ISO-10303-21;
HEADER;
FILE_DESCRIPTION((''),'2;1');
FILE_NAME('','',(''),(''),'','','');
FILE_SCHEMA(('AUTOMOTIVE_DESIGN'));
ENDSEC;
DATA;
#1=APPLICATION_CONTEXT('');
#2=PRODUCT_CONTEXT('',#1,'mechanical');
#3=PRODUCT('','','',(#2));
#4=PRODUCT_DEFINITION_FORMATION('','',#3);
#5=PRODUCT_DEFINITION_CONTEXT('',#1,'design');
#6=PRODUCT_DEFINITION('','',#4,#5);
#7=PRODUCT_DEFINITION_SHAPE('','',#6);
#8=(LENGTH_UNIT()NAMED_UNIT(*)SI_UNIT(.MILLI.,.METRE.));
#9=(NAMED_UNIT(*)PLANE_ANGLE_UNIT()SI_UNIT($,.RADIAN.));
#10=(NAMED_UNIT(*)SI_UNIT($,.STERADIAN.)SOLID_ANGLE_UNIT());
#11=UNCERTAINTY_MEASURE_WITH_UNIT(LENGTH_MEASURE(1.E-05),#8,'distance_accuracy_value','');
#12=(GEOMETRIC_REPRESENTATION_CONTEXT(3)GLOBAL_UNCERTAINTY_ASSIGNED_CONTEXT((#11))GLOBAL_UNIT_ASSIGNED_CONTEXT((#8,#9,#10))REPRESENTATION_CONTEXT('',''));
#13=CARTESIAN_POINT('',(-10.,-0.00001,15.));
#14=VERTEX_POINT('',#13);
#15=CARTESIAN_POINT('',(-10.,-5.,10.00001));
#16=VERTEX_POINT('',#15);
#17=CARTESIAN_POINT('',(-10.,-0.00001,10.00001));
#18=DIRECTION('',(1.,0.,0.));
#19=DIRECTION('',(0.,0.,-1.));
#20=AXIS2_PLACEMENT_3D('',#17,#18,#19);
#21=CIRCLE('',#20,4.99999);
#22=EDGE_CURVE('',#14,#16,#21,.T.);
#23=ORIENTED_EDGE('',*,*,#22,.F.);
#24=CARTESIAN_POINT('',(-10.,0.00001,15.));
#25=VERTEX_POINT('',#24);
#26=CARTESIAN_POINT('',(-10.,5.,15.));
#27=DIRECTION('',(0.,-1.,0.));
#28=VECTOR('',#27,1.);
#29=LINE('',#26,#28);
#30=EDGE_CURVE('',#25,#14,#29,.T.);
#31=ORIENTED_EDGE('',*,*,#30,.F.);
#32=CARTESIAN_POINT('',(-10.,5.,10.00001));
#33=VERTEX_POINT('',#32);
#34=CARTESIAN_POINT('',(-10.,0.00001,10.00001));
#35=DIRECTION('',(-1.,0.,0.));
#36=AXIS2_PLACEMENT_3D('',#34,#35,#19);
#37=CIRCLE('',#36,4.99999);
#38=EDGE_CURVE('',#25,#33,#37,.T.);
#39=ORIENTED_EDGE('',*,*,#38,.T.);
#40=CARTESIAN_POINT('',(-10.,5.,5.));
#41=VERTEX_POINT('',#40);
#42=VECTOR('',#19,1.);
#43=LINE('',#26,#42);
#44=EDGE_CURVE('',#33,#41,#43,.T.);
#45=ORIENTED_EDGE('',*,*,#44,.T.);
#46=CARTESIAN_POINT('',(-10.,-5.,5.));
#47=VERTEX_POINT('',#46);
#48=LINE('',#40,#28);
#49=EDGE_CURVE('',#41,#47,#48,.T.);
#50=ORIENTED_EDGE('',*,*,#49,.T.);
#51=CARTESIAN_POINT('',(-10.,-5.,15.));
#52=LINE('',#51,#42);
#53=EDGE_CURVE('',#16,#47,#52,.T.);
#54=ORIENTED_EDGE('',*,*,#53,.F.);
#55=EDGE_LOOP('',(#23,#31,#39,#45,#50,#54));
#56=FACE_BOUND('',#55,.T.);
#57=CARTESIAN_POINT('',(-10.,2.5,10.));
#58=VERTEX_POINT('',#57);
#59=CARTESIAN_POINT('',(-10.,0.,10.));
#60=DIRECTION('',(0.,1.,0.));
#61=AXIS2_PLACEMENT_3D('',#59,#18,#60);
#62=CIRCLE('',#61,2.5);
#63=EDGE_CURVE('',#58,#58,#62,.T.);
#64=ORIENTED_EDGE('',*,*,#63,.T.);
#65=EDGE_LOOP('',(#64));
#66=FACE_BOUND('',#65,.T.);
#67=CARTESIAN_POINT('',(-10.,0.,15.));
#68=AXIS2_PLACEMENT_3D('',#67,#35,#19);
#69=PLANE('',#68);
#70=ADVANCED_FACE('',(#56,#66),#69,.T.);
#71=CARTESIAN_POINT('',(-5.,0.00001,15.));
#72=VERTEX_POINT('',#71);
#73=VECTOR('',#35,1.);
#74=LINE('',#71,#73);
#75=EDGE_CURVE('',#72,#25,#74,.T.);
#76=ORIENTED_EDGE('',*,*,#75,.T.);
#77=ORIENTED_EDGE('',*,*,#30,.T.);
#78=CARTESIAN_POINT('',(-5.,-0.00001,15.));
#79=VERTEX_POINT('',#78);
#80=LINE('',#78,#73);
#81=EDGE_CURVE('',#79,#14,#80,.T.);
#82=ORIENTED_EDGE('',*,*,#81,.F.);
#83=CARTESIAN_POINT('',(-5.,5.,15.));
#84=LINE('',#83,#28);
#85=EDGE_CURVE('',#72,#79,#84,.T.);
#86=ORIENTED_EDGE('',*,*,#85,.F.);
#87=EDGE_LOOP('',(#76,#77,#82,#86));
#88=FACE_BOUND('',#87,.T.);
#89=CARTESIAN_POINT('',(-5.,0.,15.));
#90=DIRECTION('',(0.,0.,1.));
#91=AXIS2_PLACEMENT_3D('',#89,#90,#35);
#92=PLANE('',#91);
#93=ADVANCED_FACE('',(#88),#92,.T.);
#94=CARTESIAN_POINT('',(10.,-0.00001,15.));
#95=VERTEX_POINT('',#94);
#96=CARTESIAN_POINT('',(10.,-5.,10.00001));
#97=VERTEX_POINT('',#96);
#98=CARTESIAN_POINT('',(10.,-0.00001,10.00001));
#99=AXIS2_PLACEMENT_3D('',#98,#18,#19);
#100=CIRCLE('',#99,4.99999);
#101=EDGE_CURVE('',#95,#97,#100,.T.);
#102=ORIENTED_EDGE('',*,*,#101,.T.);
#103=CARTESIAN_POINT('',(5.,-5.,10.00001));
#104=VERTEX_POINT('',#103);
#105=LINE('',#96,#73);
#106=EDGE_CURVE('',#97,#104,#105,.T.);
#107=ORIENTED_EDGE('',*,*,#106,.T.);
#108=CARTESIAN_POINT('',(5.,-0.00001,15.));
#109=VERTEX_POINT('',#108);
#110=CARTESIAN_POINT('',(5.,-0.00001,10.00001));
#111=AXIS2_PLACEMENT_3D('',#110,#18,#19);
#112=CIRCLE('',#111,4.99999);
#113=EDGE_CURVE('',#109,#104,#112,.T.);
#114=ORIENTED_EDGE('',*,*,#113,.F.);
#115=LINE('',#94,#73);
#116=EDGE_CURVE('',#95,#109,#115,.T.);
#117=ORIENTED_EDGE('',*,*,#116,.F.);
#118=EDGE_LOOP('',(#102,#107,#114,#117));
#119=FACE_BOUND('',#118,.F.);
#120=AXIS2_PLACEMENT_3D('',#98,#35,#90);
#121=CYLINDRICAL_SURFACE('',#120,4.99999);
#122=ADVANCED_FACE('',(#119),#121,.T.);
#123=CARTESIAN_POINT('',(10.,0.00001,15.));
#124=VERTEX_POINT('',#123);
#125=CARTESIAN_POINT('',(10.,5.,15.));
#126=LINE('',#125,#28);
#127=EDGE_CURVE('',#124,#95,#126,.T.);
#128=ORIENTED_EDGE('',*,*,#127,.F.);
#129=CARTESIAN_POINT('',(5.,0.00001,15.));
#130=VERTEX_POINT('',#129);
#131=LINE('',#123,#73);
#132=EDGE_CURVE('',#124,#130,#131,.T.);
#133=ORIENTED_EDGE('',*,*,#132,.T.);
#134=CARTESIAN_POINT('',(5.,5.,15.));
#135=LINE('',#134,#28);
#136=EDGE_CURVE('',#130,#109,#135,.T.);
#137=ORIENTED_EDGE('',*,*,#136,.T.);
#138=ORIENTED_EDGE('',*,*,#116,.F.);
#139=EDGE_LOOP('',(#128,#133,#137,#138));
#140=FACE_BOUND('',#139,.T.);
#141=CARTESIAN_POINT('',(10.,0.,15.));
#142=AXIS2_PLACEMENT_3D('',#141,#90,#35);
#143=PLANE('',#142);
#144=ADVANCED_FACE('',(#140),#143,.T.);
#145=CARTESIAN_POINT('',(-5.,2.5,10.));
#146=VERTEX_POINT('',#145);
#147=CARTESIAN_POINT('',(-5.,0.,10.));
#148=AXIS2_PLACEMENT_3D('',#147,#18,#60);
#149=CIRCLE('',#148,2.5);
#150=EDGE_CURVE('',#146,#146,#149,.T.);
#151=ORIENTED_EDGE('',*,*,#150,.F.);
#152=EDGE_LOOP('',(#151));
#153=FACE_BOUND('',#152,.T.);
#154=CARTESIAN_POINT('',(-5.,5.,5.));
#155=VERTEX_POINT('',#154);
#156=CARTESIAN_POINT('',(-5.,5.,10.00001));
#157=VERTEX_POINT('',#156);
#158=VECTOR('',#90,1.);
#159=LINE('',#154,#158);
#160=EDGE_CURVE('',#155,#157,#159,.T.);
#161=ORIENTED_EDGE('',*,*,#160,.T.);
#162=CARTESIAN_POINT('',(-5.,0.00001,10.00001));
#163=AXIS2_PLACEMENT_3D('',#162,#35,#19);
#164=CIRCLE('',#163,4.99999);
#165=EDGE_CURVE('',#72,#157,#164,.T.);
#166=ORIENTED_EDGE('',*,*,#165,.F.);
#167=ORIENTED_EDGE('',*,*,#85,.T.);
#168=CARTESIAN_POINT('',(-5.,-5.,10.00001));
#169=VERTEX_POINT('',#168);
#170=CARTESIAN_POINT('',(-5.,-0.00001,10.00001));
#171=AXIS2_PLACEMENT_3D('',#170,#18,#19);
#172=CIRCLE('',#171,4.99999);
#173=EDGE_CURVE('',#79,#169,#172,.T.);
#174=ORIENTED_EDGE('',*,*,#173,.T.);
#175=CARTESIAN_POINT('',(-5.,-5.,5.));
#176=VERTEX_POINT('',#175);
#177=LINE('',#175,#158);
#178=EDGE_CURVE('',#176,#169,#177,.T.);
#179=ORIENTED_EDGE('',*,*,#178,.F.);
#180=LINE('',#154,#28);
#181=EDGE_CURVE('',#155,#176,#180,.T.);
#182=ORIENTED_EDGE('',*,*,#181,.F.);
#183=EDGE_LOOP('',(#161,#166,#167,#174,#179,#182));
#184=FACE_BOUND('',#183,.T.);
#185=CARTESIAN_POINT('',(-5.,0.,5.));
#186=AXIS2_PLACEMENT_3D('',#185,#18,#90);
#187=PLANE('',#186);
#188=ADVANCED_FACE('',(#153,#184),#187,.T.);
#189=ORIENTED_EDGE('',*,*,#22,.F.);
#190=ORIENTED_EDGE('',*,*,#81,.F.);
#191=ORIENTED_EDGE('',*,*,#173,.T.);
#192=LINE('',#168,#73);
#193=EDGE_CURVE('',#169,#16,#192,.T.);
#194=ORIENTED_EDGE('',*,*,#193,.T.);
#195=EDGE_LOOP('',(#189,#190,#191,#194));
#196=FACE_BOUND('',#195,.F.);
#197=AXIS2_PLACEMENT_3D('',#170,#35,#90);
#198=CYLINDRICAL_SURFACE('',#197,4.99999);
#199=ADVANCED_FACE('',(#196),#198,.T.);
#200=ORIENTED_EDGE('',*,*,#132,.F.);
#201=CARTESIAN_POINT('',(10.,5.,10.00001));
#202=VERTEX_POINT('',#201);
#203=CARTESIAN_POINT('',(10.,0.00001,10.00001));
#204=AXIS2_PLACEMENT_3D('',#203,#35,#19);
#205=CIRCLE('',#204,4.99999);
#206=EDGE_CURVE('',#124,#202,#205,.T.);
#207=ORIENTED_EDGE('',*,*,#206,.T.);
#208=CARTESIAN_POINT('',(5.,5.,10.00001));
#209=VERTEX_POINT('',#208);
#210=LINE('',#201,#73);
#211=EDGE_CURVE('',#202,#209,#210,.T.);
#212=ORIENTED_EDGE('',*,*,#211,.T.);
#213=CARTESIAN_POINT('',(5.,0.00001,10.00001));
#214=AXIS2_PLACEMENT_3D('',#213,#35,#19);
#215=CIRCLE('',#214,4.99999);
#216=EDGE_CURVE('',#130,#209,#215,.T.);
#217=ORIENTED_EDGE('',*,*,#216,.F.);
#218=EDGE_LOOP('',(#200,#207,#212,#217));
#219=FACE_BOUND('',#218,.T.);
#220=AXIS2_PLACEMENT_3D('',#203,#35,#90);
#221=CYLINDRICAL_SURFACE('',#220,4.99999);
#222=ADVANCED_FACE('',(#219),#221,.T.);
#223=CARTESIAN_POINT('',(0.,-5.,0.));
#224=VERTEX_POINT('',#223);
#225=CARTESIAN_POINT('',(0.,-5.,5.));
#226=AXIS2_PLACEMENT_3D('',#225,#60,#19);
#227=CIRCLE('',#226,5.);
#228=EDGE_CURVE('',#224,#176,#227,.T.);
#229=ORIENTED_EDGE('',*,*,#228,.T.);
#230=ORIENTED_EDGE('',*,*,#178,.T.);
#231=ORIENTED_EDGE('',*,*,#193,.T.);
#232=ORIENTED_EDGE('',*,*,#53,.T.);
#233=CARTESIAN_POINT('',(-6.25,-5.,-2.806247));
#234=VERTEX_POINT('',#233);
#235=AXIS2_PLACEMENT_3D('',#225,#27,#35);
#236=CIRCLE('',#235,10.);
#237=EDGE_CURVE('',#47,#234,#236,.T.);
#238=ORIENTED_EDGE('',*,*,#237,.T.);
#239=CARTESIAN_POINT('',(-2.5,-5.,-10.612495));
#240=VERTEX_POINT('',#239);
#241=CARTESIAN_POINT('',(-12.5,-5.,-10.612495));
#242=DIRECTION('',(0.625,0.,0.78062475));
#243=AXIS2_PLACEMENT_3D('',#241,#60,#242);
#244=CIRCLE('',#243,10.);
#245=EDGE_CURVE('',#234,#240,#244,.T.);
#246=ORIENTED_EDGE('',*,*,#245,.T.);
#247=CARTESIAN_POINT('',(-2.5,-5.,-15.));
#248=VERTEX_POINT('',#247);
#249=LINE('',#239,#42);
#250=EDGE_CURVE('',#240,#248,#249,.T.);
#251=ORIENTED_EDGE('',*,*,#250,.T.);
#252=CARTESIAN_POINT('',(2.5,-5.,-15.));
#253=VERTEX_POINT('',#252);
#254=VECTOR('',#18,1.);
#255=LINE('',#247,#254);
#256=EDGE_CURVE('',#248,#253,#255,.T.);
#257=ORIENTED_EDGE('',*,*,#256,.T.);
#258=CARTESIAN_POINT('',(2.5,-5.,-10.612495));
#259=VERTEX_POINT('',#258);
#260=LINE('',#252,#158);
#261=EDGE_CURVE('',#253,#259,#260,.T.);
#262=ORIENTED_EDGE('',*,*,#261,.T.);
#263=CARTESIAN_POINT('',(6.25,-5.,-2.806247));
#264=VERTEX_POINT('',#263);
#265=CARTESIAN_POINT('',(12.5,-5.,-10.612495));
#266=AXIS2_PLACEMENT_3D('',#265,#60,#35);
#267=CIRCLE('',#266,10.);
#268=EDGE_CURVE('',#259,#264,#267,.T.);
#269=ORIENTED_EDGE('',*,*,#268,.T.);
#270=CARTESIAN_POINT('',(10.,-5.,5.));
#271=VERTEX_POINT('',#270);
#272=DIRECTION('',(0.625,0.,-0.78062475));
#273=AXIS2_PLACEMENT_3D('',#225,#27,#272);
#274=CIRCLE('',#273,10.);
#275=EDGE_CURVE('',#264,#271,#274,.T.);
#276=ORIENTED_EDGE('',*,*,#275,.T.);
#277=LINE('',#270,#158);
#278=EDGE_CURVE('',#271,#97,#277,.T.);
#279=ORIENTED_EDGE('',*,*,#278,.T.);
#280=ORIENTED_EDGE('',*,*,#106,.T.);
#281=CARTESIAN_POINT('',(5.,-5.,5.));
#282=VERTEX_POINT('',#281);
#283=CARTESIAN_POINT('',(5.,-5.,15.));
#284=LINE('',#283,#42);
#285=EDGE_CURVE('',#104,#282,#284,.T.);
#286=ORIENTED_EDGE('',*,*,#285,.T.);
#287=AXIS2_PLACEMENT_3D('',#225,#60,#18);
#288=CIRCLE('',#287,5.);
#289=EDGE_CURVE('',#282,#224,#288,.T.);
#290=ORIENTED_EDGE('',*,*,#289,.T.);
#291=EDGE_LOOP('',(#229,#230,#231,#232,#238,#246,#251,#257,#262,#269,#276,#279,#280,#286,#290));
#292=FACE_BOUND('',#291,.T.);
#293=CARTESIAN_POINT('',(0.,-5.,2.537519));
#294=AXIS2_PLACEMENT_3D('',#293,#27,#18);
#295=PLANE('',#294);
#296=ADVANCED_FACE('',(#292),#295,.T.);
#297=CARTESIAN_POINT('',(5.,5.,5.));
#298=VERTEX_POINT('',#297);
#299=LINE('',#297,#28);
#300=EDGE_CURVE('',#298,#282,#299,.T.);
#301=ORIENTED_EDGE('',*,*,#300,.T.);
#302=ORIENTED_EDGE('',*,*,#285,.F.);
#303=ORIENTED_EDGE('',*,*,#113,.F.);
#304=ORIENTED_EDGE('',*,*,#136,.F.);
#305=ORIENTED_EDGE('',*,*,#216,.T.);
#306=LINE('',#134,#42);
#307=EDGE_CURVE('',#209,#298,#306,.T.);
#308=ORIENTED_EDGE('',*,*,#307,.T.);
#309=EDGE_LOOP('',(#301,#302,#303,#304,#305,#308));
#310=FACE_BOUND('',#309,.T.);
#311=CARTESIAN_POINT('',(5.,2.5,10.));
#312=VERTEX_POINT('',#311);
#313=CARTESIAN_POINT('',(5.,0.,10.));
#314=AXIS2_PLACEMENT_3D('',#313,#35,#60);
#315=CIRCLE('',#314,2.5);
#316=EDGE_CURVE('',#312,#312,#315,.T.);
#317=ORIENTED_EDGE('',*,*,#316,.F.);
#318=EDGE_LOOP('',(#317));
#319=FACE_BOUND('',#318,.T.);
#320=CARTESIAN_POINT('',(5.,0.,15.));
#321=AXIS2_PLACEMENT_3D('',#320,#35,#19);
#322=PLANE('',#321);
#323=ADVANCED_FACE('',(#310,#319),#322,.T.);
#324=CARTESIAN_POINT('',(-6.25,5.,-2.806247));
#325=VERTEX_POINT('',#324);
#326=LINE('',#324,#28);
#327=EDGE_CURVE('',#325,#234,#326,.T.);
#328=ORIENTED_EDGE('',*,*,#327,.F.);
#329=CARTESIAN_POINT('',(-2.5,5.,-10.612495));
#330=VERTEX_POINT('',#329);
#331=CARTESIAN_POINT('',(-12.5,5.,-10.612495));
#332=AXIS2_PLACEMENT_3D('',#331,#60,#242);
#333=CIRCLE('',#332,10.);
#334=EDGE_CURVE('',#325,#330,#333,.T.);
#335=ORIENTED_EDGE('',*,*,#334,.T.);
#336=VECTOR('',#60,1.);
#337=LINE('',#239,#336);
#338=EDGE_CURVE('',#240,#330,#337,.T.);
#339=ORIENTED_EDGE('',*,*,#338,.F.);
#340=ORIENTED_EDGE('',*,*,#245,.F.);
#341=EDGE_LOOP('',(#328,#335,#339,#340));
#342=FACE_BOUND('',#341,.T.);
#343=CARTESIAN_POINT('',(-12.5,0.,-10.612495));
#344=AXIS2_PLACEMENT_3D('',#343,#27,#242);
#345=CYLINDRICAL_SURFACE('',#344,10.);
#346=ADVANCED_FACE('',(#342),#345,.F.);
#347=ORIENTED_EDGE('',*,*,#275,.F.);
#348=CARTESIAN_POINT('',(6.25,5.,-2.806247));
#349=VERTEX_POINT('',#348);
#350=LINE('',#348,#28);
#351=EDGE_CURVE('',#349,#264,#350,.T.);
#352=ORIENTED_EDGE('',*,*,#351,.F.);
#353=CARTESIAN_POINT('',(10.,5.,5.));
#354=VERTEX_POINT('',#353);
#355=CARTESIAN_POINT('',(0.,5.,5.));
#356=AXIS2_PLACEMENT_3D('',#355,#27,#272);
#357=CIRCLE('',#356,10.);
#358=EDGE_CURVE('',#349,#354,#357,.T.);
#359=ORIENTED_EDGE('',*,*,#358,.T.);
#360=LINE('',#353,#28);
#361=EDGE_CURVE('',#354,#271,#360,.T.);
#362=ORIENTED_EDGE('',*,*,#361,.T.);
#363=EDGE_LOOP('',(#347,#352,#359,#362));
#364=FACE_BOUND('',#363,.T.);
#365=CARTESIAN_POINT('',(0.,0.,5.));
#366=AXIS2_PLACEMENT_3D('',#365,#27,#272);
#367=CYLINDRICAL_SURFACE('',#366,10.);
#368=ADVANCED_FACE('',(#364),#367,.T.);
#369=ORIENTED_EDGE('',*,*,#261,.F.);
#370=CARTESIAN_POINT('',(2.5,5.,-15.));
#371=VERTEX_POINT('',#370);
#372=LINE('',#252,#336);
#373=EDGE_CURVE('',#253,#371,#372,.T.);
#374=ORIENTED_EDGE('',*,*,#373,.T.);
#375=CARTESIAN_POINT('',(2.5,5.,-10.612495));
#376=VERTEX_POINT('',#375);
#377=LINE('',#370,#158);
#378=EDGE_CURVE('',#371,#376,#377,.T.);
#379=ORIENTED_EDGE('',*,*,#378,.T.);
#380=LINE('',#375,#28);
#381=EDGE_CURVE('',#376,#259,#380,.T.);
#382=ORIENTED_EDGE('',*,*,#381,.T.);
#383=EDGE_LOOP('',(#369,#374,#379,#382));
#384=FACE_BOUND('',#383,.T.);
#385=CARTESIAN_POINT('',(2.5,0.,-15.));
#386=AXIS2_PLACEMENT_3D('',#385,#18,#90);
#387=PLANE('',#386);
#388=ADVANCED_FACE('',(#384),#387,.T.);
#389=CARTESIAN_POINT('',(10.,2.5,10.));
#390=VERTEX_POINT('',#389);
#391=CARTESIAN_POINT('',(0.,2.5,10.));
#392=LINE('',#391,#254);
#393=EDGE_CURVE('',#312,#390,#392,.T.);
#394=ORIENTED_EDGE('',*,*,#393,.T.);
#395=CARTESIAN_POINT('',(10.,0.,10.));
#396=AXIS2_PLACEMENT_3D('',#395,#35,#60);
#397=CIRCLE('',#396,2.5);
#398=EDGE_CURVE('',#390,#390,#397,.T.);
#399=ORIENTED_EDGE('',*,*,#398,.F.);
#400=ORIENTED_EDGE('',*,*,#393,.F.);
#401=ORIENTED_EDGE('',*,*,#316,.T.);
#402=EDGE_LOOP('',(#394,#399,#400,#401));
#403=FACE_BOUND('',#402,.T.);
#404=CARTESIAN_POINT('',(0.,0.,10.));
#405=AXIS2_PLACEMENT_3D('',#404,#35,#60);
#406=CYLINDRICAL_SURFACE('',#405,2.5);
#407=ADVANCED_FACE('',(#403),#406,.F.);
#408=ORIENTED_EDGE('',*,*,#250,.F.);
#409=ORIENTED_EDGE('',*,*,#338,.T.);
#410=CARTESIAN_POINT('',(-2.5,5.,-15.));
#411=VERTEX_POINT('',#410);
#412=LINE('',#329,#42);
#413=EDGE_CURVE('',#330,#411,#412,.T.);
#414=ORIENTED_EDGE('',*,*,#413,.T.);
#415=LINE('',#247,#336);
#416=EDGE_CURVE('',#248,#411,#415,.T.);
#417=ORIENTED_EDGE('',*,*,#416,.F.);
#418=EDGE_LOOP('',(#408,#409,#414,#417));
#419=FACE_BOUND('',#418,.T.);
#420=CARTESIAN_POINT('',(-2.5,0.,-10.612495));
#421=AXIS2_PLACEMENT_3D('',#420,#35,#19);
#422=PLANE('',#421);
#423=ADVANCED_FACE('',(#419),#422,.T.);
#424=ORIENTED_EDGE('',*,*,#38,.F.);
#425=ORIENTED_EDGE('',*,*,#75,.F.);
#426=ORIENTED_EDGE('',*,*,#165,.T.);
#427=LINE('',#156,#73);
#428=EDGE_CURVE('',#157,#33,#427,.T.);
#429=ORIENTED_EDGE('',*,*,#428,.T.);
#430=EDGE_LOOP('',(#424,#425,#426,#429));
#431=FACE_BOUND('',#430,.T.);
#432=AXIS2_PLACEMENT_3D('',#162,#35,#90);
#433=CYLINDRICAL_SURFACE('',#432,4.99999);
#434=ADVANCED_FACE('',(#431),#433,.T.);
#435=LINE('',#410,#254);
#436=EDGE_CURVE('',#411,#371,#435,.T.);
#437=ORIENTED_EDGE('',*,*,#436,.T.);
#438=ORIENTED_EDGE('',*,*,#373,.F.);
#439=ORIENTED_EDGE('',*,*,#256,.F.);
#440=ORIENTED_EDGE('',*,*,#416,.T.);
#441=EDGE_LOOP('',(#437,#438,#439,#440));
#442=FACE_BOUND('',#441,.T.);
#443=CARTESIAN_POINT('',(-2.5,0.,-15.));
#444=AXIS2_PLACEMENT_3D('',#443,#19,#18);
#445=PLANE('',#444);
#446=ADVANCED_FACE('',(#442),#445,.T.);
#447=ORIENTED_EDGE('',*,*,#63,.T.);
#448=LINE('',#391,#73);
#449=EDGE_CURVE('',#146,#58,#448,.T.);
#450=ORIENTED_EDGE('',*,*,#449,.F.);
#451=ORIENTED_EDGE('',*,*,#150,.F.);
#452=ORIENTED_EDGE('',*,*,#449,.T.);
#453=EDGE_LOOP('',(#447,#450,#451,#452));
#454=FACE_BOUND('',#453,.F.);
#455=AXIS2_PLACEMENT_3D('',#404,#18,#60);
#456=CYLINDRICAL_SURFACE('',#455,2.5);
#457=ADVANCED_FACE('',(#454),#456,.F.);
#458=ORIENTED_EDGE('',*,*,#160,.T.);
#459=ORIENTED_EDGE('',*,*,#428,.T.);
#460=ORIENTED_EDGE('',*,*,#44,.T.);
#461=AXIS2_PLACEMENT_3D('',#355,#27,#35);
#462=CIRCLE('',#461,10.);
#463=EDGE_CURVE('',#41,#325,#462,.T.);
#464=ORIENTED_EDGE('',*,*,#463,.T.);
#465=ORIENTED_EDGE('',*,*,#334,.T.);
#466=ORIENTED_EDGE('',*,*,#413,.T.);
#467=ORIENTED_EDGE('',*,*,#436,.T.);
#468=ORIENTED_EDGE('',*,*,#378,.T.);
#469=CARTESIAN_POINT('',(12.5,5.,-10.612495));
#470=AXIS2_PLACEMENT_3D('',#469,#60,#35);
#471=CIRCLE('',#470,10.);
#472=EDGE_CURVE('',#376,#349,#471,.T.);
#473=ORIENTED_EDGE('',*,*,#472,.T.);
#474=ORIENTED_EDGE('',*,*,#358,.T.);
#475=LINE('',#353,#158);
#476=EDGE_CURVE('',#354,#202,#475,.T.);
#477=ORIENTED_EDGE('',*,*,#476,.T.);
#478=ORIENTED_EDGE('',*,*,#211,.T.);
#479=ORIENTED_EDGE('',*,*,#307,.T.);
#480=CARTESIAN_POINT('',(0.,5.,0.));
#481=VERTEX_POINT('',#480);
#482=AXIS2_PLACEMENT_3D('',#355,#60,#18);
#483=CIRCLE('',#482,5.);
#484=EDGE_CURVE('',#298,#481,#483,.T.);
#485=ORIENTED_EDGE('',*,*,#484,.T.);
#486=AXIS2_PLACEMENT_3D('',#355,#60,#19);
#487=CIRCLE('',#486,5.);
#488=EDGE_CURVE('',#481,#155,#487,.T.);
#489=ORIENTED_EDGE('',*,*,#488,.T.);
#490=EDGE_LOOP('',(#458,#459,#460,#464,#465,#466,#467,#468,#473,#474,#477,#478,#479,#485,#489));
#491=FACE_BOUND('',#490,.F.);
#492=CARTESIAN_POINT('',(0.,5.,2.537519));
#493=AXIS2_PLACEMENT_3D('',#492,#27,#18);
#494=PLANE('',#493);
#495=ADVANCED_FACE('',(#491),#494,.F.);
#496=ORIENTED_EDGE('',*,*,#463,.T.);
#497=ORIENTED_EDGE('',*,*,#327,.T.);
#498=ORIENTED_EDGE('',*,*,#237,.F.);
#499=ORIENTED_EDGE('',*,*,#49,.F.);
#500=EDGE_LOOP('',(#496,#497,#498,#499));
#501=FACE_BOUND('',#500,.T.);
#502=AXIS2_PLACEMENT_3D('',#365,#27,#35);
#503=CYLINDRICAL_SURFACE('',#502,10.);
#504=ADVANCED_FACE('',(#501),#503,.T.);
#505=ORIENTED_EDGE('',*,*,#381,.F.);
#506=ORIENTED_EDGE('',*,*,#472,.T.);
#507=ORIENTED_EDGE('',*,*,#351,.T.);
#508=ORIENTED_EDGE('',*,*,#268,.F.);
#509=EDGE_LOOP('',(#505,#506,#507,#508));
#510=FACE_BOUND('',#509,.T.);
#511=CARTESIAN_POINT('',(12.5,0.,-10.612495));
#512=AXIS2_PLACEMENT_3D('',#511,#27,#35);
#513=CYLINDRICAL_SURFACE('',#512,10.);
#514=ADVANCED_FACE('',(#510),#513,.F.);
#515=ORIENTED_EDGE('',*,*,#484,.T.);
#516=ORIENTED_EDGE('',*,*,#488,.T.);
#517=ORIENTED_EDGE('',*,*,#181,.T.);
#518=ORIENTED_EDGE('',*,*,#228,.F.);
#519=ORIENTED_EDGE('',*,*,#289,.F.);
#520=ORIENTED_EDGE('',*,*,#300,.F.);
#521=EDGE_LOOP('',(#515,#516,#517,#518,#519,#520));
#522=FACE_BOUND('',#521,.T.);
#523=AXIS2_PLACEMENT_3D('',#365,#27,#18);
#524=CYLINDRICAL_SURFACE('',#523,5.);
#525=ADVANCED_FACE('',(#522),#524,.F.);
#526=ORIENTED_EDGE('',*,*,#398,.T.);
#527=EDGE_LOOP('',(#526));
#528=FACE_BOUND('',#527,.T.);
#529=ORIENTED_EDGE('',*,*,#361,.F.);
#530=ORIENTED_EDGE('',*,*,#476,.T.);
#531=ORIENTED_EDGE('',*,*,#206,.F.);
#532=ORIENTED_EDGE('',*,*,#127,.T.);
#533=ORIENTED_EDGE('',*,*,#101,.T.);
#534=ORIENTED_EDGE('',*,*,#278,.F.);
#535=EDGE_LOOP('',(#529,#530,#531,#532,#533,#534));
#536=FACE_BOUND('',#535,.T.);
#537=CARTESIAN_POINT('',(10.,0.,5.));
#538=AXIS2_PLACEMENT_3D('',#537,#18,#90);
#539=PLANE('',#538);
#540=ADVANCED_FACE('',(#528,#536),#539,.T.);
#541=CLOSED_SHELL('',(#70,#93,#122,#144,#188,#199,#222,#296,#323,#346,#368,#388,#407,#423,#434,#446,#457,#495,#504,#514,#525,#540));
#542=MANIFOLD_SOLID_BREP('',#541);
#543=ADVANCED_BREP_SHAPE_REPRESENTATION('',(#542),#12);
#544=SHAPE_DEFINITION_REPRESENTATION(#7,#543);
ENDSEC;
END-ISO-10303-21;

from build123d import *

# Parameters (mm, degrees)
F1_DEPTH      = 5
F2_R          = 4.99999
F3_R          = 2.5
F4_DEPTH      = 10.001
F4_DEPTH_BACK = 10.001


# Not quite as in the source:
# - a fillet or chamfer is up to 0.001 mm smaller than in the source, because OpenCascade refuses the exact size


with BuildPart() as f1:
    # F0 (on Front) → F1 (new body, symmetric)
    with BuildSketch(Plane.XZ):
        with BuildLine():
            Line((0, -15), (2.5, -15))
            Line((2.5, -15), (2.5, -10.612494996))
            ThreePointArc((2.5, -10.612494996), (3.4861218113, -6.2823679771), (6.25, -2.806247498))
            ThreePointArc((6.25, -2.806247498), (9.0138781887, 0.6698729811), (10, 5))
            Line((10, 5), (10, 15))
            Line((10, 15), (5, 15))
            Line((5, 15), (5, 5))
            ThreePointArc((5, 5), (3.5355339059, 1.4644660941), (0, 0))
            ThreePointArc((0, 0), (-3.5355339059, 1.4644660941), (-5, 5))
            Line((-5, 5), (-5, 15))
            Line((-5, 15), (-10, 15))
            Line((-10, 15), (-10, 5))
            ThreePointArc((-10, 5), (-9.0138781887, 0.6698729811), (-6.25, -2.806247498))
            ThreePointArc((-6.25, -2.806247498), (-3.4861218113, -6.2823679771), (-2.5, -10.612494996))
            Line((-2.5, -10.612494996), (-2.5, -15))
            Line((-2.5, -15), (0, -15))
        make_face()
    extrude(amount=F1_DEPTH, both=True)

    # F2 (radius 5 in the source; OpenCascade refuses exactly that, so slightly less here)
    f2_edges = [f1.edges().sort_by_distance(p)[0] for p in [
        (-7.5, -5, 15),
        (7.5, -5, 15),
        (7.5, 5, 15),
        (-7.5, 5, 15),
    ]]
    fillet(f2_edges, radius=F2_R)

    # F3 (on Right) → F4 (cut, two sides)
    with BuildSketch(Plane.YZ) as f4_sk:
        with Locations((0, 10)):
            Circle(F3_R)
    extrude(amount=-F4_DEPTH, mode=Mode.SUBTRACT)
    extrude(f4_sk.sketch, amount=F4_DEPTH_BACK, mode=Mode.SUBTRACT)


solid = f1.part
